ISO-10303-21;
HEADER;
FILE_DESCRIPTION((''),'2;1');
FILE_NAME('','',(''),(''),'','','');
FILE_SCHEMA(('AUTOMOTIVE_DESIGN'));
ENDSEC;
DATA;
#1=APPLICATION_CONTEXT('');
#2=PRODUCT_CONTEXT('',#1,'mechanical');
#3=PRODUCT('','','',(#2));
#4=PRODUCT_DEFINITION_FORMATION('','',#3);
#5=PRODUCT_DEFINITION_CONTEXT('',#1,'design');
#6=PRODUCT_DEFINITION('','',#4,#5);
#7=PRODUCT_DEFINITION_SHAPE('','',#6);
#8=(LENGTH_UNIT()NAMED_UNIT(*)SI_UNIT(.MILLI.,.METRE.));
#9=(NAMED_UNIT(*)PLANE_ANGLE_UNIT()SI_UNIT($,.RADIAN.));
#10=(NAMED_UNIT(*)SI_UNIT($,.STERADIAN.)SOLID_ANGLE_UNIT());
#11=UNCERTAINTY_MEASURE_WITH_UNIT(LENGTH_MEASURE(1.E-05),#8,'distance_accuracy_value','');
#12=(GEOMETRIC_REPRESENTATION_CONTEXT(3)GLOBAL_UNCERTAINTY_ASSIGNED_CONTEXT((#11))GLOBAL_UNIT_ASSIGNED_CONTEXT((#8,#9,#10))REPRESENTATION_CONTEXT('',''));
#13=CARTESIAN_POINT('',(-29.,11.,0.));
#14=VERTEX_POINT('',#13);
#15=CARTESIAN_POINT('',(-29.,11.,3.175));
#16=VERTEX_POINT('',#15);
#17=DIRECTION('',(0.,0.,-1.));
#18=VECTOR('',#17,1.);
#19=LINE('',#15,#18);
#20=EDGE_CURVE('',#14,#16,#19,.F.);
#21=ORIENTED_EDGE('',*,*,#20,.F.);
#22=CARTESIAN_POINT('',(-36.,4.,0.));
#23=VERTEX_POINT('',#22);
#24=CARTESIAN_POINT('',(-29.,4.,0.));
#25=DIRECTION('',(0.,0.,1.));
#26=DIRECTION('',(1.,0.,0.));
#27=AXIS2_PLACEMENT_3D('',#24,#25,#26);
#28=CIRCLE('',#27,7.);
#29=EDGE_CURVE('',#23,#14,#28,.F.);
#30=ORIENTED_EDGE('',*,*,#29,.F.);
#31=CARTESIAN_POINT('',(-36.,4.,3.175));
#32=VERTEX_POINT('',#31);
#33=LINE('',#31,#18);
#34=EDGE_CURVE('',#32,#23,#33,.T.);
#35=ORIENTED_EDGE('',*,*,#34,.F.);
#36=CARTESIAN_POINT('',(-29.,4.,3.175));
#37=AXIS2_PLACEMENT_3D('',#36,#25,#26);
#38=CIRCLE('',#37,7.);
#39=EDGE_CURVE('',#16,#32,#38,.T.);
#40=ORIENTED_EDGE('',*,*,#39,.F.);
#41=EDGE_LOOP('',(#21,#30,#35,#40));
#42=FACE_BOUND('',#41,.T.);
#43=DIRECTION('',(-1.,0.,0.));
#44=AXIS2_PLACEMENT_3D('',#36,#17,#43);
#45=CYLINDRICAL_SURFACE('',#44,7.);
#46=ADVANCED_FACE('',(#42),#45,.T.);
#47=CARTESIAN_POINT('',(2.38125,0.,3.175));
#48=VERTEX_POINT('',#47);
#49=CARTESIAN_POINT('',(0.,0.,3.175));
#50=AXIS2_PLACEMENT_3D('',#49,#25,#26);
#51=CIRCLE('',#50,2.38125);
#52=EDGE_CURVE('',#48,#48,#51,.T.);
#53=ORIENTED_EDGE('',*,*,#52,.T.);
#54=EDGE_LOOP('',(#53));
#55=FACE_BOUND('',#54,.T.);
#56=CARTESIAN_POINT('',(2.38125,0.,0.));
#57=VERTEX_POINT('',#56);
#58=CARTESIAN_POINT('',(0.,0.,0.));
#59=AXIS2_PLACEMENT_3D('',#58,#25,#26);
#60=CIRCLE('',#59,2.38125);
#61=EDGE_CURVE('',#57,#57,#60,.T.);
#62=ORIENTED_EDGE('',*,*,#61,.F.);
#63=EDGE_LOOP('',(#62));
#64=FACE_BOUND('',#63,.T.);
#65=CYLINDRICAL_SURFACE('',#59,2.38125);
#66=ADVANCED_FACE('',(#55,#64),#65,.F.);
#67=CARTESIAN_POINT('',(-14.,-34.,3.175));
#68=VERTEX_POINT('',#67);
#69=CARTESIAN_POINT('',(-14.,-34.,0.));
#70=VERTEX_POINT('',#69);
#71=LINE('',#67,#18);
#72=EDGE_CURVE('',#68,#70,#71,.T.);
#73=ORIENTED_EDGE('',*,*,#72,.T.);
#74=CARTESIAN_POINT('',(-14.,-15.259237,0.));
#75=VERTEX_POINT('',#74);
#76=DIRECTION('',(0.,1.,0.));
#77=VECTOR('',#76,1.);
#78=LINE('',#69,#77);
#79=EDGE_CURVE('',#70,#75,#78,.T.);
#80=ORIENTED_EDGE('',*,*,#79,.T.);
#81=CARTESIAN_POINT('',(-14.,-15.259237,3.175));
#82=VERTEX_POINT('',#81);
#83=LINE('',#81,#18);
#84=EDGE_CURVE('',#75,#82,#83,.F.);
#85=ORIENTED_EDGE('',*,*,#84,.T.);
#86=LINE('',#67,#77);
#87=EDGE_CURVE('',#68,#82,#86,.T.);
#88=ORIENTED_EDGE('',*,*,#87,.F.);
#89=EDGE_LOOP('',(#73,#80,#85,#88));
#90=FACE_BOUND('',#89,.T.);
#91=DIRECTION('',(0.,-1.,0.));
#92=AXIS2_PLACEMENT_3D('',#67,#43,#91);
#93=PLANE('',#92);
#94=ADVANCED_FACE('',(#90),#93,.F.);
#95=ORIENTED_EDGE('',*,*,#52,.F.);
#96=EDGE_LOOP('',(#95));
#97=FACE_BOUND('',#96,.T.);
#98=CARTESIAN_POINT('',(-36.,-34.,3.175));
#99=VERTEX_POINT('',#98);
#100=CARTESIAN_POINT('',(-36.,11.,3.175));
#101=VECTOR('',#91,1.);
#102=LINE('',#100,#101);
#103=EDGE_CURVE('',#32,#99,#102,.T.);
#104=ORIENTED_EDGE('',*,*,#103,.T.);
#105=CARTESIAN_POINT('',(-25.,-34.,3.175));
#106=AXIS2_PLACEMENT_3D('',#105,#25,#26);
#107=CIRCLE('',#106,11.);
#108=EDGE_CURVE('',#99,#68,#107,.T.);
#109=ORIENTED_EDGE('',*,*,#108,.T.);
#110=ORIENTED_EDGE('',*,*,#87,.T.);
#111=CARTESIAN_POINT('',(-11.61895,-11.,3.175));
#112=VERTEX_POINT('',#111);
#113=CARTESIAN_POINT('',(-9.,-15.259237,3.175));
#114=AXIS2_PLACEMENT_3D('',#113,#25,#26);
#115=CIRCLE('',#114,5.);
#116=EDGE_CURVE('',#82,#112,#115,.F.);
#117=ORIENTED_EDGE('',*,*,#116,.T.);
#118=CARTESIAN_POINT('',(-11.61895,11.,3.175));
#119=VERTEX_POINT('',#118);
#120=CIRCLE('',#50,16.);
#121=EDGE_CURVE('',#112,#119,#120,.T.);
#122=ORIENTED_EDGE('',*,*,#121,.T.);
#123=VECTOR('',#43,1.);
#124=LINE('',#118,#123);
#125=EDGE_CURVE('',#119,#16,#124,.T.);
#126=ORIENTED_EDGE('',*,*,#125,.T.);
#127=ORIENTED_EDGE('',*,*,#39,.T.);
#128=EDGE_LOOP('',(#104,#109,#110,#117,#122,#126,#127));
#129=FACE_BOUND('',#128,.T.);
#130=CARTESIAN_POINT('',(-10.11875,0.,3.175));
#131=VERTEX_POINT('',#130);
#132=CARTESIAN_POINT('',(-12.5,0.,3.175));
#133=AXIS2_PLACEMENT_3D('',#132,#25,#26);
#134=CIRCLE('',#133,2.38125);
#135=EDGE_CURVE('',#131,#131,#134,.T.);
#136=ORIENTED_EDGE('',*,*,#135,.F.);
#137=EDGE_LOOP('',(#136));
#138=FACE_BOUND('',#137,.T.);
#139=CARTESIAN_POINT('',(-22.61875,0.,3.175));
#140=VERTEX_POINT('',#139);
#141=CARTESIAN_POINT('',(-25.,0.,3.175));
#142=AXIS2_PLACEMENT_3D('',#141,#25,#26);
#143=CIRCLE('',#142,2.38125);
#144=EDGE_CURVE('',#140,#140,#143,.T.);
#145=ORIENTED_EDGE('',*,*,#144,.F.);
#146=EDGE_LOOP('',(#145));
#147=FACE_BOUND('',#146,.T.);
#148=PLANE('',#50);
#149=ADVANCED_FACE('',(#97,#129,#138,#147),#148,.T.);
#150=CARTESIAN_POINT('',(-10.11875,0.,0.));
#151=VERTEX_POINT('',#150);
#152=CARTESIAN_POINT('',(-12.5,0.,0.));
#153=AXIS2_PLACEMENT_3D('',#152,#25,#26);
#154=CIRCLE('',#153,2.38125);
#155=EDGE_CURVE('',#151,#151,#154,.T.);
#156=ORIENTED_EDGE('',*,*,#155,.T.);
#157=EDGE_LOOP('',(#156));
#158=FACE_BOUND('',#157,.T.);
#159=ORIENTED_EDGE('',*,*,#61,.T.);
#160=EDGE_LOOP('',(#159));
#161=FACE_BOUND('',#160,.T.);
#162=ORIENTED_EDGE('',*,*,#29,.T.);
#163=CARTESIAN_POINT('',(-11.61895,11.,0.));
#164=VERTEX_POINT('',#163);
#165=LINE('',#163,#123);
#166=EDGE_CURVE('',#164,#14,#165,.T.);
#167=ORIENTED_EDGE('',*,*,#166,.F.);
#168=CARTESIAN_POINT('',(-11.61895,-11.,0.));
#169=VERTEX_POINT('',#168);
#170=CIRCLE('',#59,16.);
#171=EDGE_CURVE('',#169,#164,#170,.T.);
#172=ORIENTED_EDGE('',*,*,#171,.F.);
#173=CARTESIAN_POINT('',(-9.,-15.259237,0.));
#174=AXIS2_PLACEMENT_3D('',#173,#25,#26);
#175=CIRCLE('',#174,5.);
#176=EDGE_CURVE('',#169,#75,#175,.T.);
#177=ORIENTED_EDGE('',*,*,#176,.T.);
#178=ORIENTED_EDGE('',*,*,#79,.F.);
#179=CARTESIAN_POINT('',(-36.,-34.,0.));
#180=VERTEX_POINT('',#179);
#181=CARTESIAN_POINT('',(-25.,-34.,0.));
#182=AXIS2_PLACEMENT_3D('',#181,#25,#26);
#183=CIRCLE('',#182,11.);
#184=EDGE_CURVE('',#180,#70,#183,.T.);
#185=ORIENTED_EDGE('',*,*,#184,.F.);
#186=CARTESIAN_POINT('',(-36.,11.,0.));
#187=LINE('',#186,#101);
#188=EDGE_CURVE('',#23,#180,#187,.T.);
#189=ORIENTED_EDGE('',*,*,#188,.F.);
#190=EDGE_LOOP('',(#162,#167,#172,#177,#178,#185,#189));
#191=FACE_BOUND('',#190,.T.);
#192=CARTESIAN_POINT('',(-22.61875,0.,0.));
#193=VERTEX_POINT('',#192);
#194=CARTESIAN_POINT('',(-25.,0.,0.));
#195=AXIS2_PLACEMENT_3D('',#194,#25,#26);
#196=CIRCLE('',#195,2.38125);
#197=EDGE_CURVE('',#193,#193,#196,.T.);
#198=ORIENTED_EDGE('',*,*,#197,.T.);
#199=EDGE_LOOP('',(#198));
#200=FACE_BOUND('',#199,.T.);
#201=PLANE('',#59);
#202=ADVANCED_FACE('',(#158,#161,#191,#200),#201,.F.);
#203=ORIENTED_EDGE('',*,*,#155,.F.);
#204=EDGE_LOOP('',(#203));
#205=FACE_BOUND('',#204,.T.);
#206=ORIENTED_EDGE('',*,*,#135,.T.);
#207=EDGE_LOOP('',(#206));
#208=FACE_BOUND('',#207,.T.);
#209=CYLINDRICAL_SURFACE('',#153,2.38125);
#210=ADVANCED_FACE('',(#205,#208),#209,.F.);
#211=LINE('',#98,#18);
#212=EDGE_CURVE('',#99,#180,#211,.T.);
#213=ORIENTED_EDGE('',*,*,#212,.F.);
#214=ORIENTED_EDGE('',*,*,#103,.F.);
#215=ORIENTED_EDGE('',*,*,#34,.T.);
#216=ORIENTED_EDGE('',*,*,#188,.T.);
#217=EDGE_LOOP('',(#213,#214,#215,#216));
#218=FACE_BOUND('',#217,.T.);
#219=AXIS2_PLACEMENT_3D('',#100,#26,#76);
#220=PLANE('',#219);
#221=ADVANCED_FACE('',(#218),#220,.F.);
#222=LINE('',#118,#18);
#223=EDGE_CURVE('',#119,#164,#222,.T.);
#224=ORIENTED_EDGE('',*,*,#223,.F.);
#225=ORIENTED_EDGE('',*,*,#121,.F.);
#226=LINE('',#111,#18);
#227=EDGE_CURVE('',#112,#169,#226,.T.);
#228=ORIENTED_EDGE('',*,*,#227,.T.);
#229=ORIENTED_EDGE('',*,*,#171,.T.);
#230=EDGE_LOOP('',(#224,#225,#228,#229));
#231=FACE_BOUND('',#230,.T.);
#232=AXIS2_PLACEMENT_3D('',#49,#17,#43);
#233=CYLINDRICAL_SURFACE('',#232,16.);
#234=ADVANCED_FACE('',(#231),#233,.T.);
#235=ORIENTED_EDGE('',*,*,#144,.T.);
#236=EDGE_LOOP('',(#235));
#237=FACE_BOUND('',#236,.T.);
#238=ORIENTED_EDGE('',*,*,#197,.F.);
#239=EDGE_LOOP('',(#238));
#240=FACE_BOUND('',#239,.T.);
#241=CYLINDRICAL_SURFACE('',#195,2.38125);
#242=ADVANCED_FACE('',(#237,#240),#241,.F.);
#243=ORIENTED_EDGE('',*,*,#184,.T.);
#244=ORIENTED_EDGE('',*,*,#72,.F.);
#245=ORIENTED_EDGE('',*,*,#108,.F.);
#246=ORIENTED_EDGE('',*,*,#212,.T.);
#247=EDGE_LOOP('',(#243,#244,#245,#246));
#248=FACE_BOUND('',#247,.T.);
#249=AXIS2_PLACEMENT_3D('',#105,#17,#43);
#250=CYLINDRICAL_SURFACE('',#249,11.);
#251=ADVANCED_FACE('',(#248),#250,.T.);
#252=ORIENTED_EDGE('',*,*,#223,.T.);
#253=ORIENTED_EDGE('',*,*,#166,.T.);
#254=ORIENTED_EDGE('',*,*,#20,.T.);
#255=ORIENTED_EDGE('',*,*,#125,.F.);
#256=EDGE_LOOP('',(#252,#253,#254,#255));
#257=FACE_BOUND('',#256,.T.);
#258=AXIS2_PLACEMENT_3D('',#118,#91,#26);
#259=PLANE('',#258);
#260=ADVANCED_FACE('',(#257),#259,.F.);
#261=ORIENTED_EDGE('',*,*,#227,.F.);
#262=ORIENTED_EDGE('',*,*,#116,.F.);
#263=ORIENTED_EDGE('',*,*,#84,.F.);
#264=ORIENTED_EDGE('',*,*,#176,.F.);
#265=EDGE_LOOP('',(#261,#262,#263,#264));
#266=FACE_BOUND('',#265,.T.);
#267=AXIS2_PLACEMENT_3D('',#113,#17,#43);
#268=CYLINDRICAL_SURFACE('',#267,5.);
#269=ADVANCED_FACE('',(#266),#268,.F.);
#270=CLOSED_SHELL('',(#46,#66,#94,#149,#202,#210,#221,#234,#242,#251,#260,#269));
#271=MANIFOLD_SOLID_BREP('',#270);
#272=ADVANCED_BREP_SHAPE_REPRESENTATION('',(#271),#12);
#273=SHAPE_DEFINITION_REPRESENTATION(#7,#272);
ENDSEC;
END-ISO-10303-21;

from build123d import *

# Parameters (mm, degrees)
BOSS_EXTRUDE1_DEPTH = 3.175
FILLET1_R           = 7
FILLET2_R           = 5
SKETCH2_R           = 2.38125
CUT_EXTRUDE1_DEPTH  = 58.715514595
LPATTERN1_COUNT     = 3
LPATTERN1_PITCH     = 12.5


with BuildPart() as part:
    # Sketch1 → Boss-Extrude1 (new body)
    with BuildSketch(Plane.XY):
        with BuildLine():
            Line((-11.618950039, 11), (-36, 11))
            Line((-36, 11), (-36, -34))
            ThreePointArc((-36, -34), (-25, -45), (-14, -34))
            Line((-14, -34), (-14, -11))
            Line((-14, -11), (-11.618950039, -11))
            ThreePointArc((-11.618950039, -11), (16, 0), (-11.618950039, 11))
        make_face()
    extrude(amount=BOSS_EXTRUDE1_DEPTH)

    # Fillet1
    fillet1_edges = [part.edges().sort_by_distance(p)[0] for p in [
        (-36, 11, 1.5875),
    ]]
    fillet(fillet1_edges, radius=FILLET1_R)

    # Fillet2
    # the kernel refuses this fillet: 5 mm, written as the material it adds along each edge
    with BuildSketch(Plane(origin=(-14, -11, 0), x_dir=(1, 0, 0), z_dir=(0, 0, 1))) as fillet2_piece_1:
        with BuildLine():
            CenterArc((5, -4.259237102), FILLET2_R, 121.586822832, 58.413177168)
            Line((0, -4.259237102), (-0.1, -4.259237102))
            Line((-0.1, -4.259237102), (-0.1, 0))
            Line((-0.1, 0), (0, 0.1))
            ThreePointArc((0, 0.1), (1.190524981, 0.1), (2.328670961, 0.085184742))
            Line((2.328670961, 0.085184742), (2.381049961, 0))
        make_face()
    extrude(amount=3.175)

    # Sketch2 → Cut-Extrude1 (cut, through all)
    with BuildSketch(Plane.XY.offset(3.175)):
        Circle(SKETCH2_R)
    cut_extrude1 = extrude(amount=-CUT_EXTRUDE1_DEPTH, mode=Mode.SUBTRACT)

    # LPattern1: Cut-Extrude1 ×3
    with Locations(*[(-i * LPATTERN1_PITCH, 0, 0) for i in range(1, LPATTERN1_COUNT)]):
        add(cut_extrude1, mode=Mode.SUBTRACT)


solid = part.part
